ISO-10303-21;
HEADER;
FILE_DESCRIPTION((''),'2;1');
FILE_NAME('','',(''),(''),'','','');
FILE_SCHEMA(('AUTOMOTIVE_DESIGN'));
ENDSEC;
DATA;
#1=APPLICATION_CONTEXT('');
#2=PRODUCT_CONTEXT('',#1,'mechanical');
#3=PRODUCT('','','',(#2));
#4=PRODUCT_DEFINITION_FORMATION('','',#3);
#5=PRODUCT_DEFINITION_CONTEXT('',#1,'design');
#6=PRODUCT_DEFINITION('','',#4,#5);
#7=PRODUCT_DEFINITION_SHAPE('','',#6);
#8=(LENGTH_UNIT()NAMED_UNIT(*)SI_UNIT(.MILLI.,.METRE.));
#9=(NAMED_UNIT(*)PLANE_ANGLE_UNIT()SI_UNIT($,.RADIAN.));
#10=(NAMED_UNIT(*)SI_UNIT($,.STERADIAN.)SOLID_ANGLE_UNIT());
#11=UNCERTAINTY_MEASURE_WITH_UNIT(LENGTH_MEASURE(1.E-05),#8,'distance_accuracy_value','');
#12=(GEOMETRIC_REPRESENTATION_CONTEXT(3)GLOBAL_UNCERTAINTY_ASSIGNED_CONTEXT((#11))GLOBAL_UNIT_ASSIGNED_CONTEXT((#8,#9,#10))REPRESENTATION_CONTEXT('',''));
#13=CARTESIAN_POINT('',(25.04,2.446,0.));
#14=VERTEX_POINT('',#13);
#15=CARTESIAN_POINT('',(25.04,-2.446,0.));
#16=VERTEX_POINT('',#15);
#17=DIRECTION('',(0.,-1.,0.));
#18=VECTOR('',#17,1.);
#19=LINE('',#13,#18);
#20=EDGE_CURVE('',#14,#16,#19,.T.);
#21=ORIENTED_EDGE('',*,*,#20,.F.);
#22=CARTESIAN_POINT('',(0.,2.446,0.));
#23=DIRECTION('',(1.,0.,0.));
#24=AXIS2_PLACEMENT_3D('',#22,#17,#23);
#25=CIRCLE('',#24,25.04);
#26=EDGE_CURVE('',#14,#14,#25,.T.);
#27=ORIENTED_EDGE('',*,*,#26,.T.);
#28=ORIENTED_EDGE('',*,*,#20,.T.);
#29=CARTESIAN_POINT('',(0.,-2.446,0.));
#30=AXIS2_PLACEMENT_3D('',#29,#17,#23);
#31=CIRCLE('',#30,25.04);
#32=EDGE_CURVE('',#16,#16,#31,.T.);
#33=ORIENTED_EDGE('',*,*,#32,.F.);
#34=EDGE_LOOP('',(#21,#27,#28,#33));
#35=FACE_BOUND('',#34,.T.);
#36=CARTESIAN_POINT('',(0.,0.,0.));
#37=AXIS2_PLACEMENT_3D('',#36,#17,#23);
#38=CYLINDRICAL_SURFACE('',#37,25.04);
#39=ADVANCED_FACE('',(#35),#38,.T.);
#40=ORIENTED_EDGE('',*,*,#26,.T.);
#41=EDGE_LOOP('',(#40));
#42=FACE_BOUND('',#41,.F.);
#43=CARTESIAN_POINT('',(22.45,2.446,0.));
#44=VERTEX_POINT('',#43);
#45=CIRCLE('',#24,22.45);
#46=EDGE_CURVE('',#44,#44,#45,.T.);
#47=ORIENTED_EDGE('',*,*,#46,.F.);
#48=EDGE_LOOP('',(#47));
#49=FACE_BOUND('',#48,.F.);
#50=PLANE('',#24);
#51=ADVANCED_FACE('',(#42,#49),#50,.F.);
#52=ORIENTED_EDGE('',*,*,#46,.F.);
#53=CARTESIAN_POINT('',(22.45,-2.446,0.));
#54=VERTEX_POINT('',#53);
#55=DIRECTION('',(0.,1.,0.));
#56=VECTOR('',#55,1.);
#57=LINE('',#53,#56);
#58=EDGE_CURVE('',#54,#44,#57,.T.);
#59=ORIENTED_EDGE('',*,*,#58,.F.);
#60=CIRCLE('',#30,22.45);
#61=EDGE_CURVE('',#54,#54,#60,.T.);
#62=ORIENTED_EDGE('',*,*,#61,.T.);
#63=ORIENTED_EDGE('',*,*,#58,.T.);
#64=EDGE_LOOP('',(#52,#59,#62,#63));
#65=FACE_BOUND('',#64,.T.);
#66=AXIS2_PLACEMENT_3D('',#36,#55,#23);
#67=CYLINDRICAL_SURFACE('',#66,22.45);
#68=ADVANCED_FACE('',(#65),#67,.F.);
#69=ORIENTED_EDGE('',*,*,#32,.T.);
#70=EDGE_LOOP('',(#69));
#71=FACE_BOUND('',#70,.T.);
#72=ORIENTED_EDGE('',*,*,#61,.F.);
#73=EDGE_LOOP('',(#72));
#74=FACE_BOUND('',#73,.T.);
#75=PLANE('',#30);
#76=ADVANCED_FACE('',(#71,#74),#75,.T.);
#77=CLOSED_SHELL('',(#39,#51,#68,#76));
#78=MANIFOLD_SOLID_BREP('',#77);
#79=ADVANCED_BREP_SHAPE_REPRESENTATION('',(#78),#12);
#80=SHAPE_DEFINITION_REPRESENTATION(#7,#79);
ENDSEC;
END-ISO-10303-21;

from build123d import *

# Parameters (mm, degrees)
F0_R     = 25.04
F0_R_2   = 22.45
F1_DEPTH = 2.446


# Not quite as in the source:
# - a feature of the source that left no trace in its solid (it failed there, or was rolled back) is left out


with BuildPart() as f1:
    # F0 (on Front) → F1 (new body, symmetric)
    with BuildSketch(Plane.XZ):
        Circle(F0_R)
        Circle(F0_R_2, mode=Mode.SUBTRACT)
    extrude(amount=F1_DEPTH, both=True)


solid = f1.part
